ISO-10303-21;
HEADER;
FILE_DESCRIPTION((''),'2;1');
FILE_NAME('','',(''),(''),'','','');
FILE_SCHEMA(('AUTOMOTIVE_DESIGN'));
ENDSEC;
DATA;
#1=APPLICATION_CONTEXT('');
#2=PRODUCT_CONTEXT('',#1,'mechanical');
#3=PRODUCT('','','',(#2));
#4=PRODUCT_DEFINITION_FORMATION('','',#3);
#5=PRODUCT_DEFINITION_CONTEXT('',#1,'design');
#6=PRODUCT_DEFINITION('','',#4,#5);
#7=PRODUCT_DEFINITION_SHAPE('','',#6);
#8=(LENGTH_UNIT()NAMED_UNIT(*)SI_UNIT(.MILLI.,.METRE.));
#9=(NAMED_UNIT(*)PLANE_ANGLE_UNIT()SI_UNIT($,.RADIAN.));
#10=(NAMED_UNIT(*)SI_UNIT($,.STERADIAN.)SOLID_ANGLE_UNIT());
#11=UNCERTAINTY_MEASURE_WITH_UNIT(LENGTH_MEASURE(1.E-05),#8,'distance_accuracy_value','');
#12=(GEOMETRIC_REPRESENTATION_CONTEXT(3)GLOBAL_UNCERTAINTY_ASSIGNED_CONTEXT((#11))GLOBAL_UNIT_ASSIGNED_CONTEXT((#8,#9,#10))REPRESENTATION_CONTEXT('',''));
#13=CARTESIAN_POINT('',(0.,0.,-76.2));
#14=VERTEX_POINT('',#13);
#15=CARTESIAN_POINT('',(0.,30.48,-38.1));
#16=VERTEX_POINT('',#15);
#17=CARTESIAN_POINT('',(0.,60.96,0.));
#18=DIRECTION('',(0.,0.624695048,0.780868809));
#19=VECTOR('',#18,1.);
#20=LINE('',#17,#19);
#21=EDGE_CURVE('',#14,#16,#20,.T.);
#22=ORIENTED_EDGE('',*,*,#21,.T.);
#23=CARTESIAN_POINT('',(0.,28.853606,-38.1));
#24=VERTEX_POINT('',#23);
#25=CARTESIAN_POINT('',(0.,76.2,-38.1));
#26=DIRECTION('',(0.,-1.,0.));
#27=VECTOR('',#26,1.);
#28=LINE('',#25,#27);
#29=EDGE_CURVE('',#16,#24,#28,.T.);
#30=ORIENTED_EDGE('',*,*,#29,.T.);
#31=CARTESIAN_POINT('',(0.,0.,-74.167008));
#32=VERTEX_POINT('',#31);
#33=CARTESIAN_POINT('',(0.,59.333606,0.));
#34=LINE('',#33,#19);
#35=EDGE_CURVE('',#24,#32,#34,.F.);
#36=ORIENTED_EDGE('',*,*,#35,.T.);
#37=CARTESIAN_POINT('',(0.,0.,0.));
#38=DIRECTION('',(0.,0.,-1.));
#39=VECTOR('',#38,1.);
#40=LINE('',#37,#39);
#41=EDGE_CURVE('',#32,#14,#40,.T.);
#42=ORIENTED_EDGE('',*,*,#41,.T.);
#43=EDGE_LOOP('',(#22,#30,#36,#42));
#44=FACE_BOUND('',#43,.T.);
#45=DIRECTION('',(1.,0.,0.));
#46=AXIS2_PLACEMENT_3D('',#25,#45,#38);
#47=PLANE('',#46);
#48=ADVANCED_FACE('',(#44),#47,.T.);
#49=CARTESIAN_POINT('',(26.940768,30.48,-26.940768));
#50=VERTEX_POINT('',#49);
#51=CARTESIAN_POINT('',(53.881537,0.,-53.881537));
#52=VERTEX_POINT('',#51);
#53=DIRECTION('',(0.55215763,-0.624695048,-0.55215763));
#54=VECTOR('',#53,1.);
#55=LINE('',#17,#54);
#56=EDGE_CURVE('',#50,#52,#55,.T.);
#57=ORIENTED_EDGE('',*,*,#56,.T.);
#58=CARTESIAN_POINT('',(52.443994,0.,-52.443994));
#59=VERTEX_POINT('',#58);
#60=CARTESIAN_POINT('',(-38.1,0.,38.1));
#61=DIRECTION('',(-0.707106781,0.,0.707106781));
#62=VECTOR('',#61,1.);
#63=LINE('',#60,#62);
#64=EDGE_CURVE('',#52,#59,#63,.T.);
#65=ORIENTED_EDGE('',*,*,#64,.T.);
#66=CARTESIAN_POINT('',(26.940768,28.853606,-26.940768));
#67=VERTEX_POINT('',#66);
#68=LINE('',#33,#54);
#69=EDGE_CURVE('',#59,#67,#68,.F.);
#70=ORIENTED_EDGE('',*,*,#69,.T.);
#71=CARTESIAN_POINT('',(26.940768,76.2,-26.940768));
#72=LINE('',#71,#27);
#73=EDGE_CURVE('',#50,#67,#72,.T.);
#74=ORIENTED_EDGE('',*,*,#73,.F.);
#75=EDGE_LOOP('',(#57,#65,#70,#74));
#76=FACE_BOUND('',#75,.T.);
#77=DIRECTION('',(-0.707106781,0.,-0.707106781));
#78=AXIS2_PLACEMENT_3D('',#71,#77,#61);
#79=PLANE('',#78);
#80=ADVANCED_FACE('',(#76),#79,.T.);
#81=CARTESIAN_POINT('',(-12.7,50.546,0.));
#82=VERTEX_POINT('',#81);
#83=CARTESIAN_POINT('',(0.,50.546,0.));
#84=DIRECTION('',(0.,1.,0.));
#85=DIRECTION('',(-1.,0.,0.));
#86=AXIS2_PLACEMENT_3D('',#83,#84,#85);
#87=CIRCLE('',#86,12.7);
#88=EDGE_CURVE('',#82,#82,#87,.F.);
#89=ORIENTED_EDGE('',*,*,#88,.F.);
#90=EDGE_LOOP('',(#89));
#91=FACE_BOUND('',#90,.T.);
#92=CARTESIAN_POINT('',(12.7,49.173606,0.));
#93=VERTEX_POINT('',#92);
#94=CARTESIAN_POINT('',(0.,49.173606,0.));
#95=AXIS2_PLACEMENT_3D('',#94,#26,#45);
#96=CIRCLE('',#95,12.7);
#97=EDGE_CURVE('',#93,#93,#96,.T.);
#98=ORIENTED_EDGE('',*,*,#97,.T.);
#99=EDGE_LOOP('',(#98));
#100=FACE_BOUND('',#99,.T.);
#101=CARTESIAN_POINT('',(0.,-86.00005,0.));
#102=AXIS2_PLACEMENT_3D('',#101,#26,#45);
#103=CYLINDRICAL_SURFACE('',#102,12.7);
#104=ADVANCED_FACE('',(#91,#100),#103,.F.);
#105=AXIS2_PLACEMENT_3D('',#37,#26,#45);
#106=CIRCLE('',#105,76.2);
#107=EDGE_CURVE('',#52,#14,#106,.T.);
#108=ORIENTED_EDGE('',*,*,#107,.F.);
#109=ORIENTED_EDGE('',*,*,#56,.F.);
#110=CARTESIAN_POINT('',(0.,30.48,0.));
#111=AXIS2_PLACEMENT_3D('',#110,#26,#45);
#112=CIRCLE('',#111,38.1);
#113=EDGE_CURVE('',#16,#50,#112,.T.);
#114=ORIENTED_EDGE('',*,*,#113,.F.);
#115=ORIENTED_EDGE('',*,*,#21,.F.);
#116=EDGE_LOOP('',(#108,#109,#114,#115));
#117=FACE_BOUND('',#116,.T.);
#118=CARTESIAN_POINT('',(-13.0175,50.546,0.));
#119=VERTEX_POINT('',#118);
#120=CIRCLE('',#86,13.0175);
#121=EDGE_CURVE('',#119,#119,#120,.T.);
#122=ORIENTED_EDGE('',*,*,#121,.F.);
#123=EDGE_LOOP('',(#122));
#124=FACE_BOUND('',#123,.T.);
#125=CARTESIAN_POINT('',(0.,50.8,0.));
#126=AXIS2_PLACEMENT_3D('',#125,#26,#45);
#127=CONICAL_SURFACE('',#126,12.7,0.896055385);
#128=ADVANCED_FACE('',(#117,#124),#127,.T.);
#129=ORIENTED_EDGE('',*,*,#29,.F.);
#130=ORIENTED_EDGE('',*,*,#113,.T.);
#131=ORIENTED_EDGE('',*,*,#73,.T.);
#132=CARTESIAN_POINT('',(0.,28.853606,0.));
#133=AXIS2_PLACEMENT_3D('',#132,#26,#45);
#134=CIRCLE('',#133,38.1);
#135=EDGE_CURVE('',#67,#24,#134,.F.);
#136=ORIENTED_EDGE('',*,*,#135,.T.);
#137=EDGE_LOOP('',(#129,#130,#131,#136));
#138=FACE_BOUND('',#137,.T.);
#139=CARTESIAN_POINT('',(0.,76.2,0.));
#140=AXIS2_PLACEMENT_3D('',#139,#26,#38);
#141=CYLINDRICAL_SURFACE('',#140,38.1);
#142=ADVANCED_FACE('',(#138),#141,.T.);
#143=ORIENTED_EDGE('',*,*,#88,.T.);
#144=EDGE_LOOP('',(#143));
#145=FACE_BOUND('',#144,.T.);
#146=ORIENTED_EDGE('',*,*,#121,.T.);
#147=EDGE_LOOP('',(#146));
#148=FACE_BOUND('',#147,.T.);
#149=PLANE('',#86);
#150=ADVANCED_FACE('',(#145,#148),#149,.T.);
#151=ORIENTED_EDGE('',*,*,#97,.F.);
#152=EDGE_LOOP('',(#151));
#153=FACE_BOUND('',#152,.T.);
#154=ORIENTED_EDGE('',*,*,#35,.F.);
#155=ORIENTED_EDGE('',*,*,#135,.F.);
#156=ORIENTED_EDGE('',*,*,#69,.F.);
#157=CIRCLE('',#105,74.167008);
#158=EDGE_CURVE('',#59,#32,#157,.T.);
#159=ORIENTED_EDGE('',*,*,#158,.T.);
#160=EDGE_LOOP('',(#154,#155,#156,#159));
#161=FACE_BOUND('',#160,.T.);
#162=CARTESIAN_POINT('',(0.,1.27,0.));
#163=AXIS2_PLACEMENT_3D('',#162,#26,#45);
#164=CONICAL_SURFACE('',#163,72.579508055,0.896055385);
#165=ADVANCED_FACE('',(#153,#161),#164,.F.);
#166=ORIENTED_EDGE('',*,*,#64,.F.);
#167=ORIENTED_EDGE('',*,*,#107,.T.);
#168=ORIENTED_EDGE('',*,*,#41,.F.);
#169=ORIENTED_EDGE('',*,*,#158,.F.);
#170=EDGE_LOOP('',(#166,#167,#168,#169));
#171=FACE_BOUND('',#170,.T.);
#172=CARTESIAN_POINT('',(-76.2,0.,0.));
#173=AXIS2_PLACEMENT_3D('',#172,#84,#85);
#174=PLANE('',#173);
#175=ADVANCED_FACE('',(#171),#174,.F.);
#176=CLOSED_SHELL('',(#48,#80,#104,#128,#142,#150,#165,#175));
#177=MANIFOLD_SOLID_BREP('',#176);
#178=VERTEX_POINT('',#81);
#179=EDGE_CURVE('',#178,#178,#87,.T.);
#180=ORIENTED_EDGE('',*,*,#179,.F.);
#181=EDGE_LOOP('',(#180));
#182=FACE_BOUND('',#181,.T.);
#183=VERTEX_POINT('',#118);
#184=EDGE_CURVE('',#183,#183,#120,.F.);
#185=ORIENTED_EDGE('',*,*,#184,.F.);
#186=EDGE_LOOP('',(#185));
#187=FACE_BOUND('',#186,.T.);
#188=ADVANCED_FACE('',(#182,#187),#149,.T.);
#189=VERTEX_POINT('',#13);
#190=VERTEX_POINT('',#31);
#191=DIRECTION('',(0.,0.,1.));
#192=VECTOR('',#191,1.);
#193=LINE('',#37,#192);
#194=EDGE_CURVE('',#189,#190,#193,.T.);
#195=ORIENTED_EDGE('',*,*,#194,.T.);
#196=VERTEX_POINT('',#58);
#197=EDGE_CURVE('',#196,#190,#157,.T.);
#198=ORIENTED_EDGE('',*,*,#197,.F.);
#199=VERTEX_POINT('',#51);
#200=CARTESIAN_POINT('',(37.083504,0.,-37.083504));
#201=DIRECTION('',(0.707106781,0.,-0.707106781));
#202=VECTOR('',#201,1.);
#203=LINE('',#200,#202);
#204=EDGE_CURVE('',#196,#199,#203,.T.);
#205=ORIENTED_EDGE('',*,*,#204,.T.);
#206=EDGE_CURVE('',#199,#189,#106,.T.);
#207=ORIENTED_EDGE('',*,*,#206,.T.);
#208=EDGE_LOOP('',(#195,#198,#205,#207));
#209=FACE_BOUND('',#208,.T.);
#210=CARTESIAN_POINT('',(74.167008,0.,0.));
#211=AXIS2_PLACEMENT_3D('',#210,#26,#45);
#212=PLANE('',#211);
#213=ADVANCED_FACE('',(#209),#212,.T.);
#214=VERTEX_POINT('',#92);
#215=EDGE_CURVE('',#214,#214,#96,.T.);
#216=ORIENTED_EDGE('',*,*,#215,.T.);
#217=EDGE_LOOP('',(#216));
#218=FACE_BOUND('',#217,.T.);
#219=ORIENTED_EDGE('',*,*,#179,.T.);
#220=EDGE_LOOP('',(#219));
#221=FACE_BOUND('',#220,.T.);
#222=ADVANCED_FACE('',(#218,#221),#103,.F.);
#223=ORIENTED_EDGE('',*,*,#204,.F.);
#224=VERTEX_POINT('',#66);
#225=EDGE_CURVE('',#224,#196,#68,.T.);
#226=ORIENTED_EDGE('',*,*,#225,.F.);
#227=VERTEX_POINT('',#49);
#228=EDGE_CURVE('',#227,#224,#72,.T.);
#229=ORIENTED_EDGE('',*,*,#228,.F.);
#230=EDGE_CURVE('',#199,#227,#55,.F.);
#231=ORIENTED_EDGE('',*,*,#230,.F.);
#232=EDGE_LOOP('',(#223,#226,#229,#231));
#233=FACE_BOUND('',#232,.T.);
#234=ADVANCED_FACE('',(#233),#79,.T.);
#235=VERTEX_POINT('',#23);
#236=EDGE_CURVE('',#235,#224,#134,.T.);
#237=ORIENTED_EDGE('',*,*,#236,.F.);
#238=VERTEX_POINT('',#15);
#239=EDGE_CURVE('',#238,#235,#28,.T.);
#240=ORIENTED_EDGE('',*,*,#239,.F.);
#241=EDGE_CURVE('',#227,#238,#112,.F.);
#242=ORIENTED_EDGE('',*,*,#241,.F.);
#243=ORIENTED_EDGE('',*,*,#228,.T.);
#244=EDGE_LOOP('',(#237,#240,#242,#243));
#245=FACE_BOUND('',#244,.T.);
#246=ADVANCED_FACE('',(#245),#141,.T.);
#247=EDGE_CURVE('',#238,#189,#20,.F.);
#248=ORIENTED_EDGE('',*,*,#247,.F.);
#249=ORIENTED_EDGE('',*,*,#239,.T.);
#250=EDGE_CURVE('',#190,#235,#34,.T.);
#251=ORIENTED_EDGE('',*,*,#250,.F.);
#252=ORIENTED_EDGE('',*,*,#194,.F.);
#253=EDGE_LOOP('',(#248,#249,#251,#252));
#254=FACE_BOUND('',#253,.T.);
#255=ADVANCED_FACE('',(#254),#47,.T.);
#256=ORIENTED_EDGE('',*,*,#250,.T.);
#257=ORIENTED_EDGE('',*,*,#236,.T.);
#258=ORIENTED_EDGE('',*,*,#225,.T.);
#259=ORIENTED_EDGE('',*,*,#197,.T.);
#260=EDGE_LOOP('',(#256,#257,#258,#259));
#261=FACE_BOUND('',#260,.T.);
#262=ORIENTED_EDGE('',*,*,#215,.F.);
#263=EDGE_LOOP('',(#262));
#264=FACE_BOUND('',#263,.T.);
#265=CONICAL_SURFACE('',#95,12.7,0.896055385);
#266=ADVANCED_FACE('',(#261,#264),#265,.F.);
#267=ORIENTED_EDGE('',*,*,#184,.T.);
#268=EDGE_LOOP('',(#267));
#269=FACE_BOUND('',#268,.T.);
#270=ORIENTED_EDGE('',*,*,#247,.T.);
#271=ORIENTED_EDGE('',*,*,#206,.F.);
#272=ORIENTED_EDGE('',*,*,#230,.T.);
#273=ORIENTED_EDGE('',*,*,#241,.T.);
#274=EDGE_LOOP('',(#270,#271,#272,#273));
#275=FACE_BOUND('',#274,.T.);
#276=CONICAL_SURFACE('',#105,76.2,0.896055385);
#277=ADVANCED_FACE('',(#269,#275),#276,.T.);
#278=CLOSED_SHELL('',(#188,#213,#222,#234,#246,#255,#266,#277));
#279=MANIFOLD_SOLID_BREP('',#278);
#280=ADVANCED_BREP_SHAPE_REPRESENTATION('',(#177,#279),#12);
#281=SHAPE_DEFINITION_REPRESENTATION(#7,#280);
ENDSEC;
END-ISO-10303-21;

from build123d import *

# Parameters (mm, degrees)
CUT_EXTRUDE1_DEPTH = 76.2
CUT_EXTRUDE2_DEPTH = 0.254


# Read off the part's stored shape, not the designer's step: Revolve2
with BuildPart() as part:
    # Revolve2 outline → Revolve2 (revolve)
    with BuildSketch(Plane.XY):
        Polygon((12.7, 49.173606444), (74.167008055, 0), (76.2, 0), (12.7, 50.8), align=None)
    revolve(axis=Axis((0, 0, 0), (0, 1, 0)))


with BuildPart() as body_2:
    # Revolve2 2 outline → Revolve2 2 (revolve)
    with BuildSketch(Plane.XY):
        Polygon((12.7, 50.8), (12.7, 49.173606444), (74.167008055, 0), (76.2, 0), align=None)
    revolve(axis=Axis((0, 0, 0), (0, 1, 0)))


with BuildPart() as cut_extrude1_tool:
    # Sketch2 → Cut-Extrude1 (new, symmetric)
    with BuildSketch(Plane(origin=(0, 0, 0), x_dir=(1, 0, 0), z_dir=(0, 1, 0))):
        with BuildLine():
            Line((0, 38.1), (0, 76.2))
            ThreePointArc((0, 76.2), (29.160477546, 70.399620377), (53.881536726, 53.881536726))
            Line((53.881536726, 53.881536726), (26.940768363, 26.940768363))
            ThreePointArc((26.940768363, 26.940768363), (14.580238773, 35.199810189), (0, 38.1))
        make_face()
    extrude(amount=CUT_EXTRUDE1_DEPTH, both=True)


with BuildPart() as part_1:
    add(part.part)

    # Cut-Extrude1: cut by cut_extrude1_tool
    add(cut_extrude1_tool.part, mode=Mode.SUBTRACT)


with BuildPart() as body_2_1:
    add(body_2.part)

    # Cut-Extrude1: cut by cut_extrude1_tool
    add(cut_extrude1_tool.part, mode=Mode.SUBTRACT)


with BuildPart() as cut_extrude2_tool:
    # 3DSketch1 → Cut-Extrude2 (new body)
    with BuildSketch(Plane(origin=(-15.875, 50.8, 15.875), x_dir=(0.7071067811865501, 2.4725865491083076e-15, -0.7071067811865451), z_dir=(0, -1, 0))):
        Polygon((0, 0), (22.450640303, 22.450640303), (44.901280605, 0), (22.450640303, -22.450640303), align=None)
    extrude(amount=CUT_EXTRUDE2_DEPTH)


with BuildPart() as part_2:
    add(part_1.part)

    # Cut-Extrude2: cut by cut_extrude2_tool
    add(cut_extrude2_tool.part, mode=Mode.SUBTRACT)


with BuildPart() as body_2_2:
    add(body_2_1.part)

    # Cut-Extrude2: cut by cut_extrude2_tool
    add(cut_extrude2_tool.part, mode=Mode.SUBTRACT)


solid = Compound([part_2.part, body_2_2.part])
